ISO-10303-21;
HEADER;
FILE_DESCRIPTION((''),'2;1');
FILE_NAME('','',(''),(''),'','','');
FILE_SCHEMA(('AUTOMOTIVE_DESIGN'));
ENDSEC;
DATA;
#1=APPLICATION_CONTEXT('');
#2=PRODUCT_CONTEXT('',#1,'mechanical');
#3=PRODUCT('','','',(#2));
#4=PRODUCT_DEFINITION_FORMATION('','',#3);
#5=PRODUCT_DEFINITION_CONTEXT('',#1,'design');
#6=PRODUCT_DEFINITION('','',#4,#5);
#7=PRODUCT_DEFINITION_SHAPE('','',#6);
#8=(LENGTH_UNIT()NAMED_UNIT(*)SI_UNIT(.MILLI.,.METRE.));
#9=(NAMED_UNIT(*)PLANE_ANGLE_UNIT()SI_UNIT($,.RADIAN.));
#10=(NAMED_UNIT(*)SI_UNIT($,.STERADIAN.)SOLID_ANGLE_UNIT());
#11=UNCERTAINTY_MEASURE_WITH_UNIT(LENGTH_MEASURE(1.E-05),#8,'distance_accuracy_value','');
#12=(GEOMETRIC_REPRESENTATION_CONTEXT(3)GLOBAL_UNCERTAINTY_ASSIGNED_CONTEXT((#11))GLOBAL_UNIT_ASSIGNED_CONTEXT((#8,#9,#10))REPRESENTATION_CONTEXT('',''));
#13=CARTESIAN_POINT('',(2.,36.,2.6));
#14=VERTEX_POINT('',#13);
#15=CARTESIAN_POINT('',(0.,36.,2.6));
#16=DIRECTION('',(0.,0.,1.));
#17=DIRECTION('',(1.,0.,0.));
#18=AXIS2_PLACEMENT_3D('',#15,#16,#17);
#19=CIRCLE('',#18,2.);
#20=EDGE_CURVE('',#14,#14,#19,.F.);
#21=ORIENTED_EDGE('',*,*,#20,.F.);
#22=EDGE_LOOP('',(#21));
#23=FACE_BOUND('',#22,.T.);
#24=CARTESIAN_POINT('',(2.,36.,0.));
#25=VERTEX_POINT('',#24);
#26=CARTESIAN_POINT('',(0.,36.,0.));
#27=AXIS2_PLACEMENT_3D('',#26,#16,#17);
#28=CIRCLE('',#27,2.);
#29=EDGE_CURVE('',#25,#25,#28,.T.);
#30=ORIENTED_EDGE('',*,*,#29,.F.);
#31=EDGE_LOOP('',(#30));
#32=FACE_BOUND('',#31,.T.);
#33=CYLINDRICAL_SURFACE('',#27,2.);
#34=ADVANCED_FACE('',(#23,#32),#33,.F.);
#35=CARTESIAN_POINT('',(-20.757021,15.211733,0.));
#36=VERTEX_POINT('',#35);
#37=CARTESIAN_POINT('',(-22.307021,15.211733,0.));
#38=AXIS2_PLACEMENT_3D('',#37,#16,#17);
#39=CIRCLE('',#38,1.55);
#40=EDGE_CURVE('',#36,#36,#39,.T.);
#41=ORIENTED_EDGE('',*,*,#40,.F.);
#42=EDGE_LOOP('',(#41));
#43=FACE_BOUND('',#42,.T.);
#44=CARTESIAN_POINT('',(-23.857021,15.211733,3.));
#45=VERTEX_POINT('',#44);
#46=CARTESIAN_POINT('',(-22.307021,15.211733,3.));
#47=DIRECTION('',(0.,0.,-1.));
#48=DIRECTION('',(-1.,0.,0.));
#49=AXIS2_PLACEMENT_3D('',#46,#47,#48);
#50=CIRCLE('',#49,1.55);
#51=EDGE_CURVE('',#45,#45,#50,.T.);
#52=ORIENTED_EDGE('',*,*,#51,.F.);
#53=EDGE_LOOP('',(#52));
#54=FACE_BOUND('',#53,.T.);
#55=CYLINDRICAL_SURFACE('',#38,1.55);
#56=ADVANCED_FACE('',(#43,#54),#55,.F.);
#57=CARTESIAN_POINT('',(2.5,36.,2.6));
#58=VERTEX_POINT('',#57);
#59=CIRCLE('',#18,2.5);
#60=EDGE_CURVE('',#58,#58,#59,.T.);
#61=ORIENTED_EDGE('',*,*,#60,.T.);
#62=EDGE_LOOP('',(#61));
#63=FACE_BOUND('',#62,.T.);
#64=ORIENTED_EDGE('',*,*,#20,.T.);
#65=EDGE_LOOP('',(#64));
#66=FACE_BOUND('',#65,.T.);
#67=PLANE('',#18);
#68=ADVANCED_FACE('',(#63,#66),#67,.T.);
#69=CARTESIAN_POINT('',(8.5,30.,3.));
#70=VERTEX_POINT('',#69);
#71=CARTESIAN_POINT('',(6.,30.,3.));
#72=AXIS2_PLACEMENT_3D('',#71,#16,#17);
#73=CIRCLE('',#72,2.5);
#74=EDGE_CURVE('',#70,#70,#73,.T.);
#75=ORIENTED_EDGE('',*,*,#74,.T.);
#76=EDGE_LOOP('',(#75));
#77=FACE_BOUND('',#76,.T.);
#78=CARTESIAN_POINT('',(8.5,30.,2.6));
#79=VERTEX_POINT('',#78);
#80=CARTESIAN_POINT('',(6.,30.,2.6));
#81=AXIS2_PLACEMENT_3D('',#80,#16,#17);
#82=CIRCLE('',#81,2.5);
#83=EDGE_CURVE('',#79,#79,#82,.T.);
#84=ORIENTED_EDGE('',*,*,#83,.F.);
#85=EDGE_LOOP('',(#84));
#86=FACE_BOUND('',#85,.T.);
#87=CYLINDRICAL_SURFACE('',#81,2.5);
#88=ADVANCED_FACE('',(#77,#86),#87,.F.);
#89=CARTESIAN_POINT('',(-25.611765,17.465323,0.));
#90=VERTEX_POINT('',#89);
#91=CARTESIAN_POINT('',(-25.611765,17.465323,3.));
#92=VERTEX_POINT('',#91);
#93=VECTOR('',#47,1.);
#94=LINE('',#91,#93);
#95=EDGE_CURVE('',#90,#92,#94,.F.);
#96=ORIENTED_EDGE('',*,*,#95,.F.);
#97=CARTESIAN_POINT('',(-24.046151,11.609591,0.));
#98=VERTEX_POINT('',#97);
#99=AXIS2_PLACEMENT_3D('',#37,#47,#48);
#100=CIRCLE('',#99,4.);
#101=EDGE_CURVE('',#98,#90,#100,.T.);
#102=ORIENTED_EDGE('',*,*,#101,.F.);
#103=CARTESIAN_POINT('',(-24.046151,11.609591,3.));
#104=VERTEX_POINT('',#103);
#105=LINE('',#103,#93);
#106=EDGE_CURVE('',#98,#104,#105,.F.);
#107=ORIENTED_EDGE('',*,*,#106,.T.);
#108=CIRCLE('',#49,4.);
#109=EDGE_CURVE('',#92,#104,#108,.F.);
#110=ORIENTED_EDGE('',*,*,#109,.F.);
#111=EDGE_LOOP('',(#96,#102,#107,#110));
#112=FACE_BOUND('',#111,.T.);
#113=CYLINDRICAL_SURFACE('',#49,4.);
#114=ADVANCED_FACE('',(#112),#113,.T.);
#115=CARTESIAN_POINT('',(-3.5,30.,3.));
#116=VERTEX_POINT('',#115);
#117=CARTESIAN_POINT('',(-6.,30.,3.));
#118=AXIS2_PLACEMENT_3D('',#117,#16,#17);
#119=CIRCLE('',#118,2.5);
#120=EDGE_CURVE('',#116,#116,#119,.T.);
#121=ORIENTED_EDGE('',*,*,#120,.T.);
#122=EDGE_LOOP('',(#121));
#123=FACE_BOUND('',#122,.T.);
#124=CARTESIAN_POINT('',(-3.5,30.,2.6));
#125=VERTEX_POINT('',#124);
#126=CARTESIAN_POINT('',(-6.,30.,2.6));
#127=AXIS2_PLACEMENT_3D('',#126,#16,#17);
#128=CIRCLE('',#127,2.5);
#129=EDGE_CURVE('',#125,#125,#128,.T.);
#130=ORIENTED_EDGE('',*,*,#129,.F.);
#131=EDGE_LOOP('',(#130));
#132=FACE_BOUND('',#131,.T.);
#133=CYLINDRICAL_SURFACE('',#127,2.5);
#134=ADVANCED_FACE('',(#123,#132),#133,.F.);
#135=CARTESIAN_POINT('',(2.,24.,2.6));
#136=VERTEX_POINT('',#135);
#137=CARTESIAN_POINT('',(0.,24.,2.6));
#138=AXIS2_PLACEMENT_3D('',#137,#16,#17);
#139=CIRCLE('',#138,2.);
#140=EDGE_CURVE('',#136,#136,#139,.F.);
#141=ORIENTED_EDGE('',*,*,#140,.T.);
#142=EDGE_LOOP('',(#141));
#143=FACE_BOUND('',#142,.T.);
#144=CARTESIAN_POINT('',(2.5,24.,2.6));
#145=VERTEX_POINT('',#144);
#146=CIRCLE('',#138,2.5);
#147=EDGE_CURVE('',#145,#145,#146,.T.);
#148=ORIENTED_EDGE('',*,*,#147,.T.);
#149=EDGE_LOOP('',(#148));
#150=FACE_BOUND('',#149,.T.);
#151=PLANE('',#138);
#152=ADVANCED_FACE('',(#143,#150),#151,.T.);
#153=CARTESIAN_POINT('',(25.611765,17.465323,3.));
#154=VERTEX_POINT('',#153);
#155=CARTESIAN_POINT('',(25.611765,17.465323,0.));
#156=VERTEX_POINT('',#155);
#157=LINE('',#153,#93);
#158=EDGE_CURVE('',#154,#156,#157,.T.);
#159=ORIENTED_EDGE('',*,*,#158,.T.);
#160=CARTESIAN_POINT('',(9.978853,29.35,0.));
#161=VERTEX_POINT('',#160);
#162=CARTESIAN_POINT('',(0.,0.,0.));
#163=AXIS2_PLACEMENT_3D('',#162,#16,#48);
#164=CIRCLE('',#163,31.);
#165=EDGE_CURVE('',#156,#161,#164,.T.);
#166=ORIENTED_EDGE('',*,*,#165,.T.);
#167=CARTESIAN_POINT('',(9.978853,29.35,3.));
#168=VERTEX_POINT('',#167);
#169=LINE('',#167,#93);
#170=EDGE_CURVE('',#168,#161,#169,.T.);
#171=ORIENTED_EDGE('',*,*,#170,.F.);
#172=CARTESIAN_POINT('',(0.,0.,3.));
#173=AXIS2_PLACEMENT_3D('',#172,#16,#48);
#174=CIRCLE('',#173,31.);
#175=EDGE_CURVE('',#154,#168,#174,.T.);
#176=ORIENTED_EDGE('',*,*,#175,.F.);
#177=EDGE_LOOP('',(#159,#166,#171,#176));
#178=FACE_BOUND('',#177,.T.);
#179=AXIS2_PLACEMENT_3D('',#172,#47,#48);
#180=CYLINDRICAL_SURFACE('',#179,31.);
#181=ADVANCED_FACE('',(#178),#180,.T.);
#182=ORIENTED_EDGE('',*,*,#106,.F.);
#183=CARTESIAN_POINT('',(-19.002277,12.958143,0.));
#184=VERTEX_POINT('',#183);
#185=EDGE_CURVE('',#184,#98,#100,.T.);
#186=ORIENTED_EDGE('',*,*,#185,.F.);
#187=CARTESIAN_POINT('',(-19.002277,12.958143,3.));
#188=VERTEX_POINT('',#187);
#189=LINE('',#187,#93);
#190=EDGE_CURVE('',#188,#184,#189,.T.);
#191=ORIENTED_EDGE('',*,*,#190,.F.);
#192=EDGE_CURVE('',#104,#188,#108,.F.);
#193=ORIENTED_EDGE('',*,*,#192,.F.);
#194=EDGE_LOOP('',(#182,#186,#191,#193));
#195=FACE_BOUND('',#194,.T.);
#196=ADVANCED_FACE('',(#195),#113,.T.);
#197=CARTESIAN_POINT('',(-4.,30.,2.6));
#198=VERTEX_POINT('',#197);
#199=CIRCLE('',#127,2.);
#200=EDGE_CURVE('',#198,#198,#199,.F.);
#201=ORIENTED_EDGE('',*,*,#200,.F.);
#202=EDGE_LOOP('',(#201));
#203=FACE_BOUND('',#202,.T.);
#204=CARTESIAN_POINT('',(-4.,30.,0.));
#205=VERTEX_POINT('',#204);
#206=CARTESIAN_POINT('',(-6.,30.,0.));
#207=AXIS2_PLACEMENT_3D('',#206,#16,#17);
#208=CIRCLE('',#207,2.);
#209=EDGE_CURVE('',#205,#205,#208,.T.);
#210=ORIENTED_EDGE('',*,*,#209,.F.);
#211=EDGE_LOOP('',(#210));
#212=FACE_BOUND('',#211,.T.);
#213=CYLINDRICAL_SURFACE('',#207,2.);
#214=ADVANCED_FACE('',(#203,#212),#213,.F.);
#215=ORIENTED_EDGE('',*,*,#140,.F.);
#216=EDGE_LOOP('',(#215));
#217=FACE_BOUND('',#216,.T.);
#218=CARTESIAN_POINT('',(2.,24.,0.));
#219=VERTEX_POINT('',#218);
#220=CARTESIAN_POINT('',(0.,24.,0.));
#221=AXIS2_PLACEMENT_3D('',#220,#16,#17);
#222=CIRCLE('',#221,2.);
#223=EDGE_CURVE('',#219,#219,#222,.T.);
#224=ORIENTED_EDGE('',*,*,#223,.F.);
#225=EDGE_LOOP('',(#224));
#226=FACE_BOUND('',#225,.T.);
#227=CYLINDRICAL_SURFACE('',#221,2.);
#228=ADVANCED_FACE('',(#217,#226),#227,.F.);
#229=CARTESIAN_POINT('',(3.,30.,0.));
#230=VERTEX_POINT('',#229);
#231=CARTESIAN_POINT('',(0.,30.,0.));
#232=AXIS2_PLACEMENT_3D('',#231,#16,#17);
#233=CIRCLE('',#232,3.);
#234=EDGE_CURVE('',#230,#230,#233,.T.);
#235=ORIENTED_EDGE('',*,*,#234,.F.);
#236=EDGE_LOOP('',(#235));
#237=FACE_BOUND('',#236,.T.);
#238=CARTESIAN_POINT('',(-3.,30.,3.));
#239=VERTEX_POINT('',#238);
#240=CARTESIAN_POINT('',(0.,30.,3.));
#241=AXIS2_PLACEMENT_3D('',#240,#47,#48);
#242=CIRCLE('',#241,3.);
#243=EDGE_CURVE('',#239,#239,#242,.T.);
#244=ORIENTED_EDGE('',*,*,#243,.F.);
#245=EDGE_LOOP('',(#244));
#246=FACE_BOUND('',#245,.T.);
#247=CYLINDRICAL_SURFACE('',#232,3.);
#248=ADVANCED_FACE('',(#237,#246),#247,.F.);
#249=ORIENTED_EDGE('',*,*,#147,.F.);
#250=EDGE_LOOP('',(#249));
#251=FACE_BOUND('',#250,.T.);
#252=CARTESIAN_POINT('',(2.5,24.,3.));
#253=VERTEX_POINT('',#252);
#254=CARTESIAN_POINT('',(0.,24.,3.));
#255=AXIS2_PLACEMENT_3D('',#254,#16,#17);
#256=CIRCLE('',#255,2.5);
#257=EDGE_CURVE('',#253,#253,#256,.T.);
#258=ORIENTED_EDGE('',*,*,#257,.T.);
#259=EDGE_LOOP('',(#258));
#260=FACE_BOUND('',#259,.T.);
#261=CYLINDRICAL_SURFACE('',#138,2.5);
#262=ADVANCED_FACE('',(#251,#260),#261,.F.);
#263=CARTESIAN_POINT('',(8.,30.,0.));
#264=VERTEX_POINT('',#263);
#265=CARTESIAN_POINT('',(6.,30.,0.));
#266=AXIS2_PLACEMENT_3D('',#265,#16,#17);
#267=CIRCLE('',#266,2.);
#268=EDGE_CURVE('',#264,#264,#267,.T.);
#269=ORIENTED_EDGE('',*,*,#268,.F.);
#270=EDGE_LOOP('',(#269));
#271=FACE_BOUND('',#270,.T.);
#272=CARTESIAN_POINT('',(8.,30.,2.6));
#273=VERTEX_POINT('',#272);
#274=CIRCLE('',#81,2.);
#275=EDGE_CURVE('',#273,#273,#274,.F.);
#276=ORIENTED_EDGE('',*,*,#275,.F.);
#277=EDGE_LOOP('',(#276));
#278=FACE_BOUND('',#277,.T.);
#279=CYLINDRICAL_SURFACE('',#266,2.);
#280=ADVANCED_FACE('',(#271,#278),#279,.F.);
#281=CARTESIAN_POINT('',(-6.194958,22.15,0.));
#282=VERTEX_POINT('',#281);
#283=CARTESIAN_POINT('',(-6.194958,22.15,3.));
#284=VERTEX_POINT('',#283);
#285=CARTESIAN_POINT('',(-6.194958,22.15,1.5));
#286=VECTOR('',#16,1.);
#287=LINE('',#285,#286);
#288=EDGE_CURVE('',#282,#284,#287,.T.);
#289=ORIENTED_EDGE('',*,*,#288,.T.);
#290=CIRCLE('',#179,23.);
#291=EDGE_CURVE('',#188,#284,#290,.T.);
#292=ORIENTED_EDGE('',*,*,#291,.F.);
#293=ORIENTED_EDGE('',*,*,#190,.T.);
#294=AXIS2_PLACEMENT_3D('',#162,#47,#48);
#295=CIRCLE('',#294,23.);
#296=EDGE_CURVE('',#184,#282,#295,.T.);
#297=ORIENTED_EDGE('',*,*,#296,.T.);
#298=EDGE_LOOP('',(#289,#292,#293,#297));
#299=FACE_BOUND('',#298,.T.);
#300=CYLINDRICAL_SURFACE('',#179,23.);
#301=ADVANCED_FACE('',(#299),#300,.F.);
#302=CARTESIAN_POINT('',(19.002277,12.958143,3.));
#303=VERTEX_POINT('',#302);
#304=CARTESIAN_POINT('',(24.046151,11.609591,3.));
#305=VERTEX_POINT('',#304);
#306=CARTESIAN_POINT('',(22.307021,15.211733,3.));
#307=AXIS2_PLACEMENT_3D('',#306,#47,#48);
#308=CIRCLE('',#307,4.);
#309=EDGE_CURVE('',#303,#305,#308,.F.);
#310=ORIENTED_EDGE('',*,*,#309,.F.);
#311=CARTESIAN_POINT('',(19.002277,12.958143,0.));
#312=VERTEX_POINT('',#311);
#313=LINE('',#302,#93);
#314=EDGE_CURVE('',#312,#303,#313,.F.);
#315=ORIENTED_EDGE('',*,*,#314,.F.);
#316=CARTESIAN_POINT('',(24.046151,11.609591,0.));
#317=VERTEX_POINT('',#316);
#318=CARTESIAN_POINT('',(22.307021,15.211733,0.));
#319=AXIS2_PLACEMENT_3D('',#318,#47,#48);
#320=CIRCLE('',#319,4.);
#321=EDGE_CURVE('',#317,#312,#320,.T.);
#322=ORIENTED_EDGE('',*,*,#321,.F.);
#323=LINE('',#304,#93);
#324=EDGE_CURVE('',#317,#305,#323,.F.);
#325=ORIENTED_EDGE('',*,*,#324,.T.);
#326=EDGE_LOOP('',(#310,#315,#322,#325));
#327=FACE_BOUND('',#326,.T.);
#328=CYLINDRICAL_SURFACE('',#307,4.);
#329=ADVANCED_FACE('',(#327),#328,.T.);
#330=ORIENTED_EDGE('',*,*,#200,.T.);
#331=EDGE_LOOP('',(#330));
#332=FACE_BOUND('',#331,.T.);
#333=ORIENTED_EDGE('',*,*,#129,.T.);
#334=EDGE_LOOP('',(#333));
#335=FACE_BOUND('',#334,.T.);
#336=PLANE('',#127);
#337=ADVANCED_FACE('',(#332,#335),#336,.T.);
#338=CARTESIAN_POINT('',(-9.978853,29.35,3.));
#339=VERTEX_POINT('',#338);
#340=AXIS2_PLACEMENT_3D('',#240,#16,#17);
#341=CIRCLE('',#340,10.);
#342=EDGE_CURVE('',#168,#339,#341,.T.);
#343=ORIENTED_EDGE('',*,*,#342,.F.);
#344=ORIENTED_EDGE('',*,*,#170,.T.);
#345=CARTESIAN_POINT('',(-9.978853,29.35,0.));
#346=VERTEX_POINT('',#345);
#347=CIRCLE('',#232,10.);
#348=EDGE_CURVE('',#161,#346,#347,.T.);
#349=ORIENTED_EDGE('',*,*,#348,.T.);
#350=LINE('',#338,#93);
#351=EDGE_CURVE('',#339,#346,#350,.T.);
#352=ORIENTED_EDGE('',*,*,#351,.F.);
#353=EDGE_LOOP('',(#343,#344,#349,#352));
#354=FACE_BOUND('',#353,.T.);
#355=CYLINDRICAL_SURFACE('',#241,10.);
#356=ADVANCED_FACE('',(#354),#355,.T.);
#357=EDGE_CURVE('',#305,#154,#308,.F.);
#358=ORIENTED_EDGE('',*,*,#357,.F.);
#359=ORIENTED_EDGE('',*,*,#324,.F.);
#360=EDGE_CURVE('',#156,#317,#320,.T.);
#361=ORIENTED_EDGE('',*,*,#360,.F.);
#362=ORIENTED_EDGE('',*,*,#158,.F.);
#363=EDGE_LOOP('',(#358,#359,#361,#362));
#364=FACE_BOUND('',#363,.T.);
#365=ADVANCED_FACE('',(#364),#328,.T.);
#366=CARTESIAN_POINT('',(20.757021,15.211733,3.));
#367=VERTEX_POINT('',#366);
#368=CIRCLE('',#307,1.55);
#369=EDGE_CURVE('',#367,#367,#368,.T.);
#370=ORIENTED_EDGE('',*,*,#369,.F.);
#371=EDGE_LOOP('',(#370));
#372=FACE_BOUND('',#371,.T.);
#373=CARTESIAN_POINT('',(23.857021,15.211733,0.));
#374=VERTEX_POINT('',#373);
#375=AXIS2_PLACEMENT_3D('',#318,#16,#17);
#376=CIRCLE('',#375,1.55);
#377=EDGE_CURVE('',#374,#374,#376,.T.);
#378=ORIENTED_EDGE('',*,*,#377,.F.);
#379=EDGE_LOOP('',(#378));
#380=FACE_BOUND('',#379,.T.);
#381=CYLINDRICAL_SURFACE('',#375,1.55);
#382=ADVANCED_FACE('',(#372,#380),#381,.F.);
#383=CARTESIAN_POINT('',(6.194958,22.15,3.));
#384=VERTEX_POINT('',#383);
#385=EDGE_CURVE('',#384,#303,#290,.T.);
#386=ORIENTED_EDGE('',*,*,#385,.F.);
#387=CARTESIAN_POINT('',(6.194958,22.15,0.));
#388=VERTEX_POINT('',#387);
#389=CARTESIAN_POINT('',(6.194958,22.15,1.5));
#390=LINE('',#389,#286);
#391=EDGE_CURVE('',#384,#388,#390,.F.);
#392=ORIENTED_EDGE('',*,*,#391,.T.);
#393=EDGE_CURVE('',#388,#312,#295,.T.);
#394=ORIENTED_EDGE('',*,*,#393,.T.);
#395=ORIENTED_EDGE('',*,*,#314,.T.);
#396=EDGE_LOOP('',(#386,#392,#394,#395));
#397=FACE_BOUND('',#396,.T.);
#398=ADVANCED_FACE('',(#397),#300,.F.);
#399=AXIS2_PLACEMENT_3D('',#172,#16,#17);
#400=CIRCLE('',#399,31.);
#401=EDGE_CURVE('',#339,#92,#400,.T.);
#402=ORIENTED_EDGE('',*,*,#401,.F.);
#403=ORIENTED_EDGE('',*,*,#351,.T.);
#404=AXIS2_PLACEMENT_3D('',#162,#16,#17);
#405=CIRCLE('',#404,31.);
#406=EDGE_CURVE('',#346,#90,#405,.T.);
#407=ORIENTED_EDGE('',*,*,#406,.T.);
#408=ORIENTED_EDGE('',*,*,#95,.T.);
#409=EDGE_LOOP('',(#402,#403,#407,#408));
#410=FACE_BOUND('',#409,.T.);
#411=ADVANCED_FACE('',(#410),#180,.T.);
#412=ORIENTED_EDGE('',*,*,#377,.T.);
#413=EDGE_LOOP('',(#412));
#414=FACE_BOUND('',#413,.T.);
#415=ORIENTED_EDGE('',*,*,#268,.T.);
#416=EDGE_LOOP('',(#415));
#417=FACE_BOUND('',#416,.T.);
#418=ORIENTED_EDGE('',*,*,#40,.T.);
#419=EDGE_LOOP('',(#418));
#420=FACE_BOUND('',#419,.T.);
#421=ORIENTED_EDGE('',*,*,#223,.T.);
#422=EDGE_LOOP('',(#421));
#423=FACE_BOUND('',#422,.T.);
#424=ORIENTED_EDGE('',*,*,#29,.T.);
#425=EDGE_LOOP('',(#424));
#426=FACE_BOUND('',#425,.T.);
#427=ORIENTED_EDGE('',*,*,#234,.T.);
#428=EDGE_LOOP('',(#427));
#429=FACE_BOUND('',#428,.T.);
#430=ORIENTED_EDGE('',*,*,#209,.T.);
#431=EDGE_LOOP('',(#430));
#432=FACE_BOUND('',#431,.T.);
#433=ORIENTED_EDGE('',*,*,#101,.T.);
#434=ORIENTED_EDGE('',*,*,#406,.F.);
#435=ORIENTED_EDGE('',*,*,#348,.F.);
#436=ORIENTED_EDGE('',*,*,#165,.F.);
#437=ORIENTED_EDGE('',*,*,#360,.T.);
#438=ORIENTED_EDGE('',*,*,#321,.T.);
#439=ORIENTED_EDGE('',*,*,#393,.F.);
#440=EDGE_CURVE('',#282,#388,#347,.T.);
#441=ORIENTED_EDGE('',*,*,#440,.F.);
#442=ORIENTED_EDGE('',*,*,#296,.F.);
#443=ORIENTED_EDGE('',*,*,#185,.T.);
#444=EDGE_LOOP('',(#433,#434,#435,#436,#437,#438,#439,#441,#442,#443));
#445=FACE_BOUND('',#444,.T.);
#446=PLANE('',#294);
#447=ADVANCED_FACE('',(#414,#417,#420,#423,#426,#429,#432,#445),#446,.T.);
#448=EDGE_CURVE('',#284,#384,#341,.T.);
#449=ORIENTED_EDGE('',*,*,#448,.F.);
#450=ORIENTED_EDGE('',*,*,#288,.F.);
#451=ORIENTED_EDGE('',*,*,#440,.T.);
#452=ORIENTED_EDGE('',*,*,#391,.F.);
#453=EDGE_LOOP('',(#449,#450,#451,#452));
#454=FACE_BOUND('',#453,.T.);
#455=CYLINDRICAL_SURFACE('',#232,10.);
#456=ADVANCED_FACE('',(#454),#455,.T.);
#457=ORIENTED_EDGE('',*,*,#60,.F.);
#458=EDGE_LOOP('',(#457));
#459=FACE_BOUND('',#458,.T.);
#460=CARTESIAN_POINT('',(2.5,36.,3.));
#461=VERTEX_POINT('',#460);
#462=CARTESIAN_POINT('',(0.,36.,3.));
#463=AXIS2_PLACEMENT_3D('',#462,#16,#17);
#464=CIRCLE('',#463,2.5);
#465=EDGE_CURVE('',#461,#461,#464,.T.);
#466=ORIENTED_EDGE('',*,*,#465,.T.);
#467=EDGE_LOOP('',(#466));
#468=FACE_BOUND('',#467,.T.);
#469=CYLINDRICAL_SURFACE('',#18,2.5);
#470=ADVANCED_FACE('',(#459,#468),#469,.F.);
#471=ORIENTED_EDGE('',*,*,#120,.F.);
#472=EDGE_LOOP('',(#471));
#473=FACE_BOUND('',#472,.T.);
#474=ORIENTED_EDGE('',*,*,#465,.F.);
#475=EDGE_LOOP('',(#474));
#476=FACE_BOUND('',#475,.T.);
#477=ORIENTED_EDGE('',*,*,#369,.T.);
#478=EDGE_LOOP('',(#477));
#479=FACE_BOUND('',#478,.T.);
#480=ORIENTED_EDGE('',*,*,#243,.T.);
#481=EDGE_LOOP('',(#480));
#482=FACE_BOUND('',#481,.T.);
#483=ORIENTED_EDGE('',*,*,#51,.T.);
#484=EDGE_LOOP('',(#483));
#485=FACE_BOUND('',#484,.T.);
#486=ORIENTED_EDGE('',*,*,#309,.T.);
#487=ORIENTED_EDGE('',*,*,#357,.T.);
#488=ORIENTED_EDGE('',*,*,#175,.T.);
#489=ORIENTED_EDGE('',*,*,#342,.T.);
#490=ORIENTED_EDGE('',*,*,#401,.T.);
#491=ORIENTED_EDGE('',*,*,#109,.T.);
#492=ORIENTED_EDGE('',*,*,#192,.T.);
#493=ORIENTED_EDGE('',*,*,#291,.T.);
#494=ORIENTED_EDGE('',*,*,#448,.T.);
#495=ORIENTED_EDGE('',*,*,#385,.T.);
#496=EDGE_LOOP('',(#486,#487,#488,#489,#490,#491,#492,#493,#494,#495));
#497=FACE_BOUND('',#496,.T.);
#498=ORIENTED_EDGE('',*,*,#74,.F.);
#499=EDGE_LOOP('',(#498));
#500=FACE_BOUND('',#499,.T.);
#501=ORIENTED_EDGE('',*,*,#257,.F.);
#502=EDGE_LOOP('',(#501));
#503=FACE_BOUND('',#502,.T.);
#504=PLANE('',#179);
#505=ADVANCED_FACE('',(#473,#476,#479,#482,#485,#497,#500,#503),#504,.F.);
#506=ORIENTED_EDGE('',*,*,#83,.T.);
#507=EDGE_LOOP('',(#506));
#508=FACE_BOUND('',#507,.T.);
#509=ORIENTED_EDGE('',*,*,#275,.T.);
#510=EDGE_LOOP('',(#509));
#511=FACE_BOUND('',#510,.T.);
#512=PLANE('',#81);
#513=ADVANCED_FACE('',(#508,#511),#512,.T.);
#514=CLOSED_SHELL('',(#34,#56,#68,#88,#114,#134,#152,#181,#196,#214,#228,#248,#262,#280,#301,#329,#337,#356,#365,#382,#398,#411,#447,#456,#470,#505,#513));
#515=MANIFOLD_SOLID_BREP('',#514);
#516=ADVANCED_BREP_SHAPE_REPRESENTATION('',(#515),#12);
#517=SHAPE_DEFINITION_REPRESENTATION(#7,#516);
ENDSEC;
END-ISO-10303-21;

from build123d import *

# Parameters (mm, degrees)
BOSS_EXTRU_1_DEPTH           = 3
BOSS_EXTRU_2_START           = -3
ESQUISSE3_R                  = 10
BOSS_EXTRU_2_DEPTH           = 3
CONG_1_R                     = 4
ENL_V_MAT_EXTRU_1_DEPTH      = 48.969384742
ENL_V_MAT_EXTRU_1_DEPTH_BACK = 48.969384742
ESQUISSE2_R                  = 3
ESQUISSE2_R_2                = 2
ENL_V_MAT_EXTRU_2_DEPTH      = 48.969384742
ENL_V_MAT_EXTRU_2_DEPTH_BACK = 48.969384742
ESQUISSE4_R                  = 1.55
ESQUISSE5_R                  = 2.5
ENL_V_MAT_EXTRU_3_DEPTH      = 0.4


with BuildPart() as part:
    # Esquisse1 → Boss.-Extru.1 (new body)
    with BuildSketch(Plane.XY):
        with BuildLine():
            Line((27.916598717, 13.47826087), (20.712315177, 10))
            ThreePointArc((20.712315177, 10), (0, 23), (-20.712315177, 10))
            Line((-20.712315177, 10), (-27.916598717, 13.47826087))
            ThreePointArc((-27.916598717, 13.47826087), (-20.542500679, 23.216495555), (-9.978852639, 29.35))
            ThreePointArc((-9.978852639, 29.35), (0, 40), (9.978852639, 29.35))
            ThreePointArc((9.978852639, 29.35), (20.542500679, 23.216495555), (27.916598717, 13.47826087))
        make_face()
    extrude(amount=BOSS_EXTRU_1_DEPTH)

    # Esquisse3 → Boss.-Extru.2 (add)
    with BuildSketch(Plane.XY.offset(3).offset(BOSS_EXTRU_2_START)):
        with Locations((0, 30)):
            Circle(ESQUISSE3_R)
    extrude(amount=BOSS_EXTRU_2_DEPTH)

    # Congé1
    cong_1_edges = [part.edges().sort_by_distance(p)[0] for p in [
        (-27.916598717, 13.47826087, 1.5),
        (-20.712315177, 10, 1.5),
        (20.712315177, 10, 1.5),
        (27.916598717, 13.47826087, 1.5),
    ]]
    fillet(cong_1_edges, radius=CONG_1_R - 0.0001)  # a hair under: the kernel refuses the full size

    # Esquisse2 → Enlèv. mat.-Extru.1 (cut, two sides: drawn at the far end of the back side and taken through both)
    with BuildSketch(Plane.XY.offset(3).offset(-ENL_V_MAT_EXTRU_1_DEPTH_BACK)):
        with Locations((0, 30)):
            Circle(ESQUISSE2_R)
        with Locations((6, 30)):
            Circle(ESQUISSE2_R_2)
        with Locations((0, 24)):
            Circle(ESQUISSE2_R_2)
        with Locations((-6, 30)):
            Circle(ESQUISSE2_R_2)
        with Locations((0, 36)):
            Circle(ESQUISSE2_R_2)
    extrude(amount=ENL_V_MAT_EXTRU_1_DEPTH + ENL_V_MAT_EXTRU_1_DEPTH_BACK, mode=Mode.SUBTRACT)

    # Esquisse4 → Enlèv. mat.-Extru.2 (cut, two sides: drawn at the far end of the back side and taken through both)
    with BuildSketch(Plane.XY.offset(3).offset(-ENL_V_MAT_EXTRU_2_DEPTH_BACK)):
        with Locations((22.307020844, 15.211733007)):
            Circle(ESQUISSE4_R)
        with Locations((-22.307020844, 15.211733007)):
            Circle(ESQUISSE4_R)
    extrude(amount=ENL_V_MAT_EXTRU_2_DEPTH + ENL_V_MAT_EXTRU_2_DEPTH_BACK, mode=Mode.SUBTRACT)

    # Esquisse5 → Enlèv. mat.-Extru.3 (cut)
    with BuildSketch(Plane.XY.offset(3)):
        with Locations((0, 24)):
            Circle(ESQUISSE5_R)
        with Locations((6, 30)):
            Circle(ESQUISSE5_R)
        with Locations((0, 36)):
            Circle(ESQUISSE5_R)
        with Locations((-6, 30)):
            Circle(ESQUISSE5_R)
    extrude(amount=-ENL_V_MAT_EXTRU_3_DEPTH, mode=Mode.SUBTRACT)


solid = part.part
